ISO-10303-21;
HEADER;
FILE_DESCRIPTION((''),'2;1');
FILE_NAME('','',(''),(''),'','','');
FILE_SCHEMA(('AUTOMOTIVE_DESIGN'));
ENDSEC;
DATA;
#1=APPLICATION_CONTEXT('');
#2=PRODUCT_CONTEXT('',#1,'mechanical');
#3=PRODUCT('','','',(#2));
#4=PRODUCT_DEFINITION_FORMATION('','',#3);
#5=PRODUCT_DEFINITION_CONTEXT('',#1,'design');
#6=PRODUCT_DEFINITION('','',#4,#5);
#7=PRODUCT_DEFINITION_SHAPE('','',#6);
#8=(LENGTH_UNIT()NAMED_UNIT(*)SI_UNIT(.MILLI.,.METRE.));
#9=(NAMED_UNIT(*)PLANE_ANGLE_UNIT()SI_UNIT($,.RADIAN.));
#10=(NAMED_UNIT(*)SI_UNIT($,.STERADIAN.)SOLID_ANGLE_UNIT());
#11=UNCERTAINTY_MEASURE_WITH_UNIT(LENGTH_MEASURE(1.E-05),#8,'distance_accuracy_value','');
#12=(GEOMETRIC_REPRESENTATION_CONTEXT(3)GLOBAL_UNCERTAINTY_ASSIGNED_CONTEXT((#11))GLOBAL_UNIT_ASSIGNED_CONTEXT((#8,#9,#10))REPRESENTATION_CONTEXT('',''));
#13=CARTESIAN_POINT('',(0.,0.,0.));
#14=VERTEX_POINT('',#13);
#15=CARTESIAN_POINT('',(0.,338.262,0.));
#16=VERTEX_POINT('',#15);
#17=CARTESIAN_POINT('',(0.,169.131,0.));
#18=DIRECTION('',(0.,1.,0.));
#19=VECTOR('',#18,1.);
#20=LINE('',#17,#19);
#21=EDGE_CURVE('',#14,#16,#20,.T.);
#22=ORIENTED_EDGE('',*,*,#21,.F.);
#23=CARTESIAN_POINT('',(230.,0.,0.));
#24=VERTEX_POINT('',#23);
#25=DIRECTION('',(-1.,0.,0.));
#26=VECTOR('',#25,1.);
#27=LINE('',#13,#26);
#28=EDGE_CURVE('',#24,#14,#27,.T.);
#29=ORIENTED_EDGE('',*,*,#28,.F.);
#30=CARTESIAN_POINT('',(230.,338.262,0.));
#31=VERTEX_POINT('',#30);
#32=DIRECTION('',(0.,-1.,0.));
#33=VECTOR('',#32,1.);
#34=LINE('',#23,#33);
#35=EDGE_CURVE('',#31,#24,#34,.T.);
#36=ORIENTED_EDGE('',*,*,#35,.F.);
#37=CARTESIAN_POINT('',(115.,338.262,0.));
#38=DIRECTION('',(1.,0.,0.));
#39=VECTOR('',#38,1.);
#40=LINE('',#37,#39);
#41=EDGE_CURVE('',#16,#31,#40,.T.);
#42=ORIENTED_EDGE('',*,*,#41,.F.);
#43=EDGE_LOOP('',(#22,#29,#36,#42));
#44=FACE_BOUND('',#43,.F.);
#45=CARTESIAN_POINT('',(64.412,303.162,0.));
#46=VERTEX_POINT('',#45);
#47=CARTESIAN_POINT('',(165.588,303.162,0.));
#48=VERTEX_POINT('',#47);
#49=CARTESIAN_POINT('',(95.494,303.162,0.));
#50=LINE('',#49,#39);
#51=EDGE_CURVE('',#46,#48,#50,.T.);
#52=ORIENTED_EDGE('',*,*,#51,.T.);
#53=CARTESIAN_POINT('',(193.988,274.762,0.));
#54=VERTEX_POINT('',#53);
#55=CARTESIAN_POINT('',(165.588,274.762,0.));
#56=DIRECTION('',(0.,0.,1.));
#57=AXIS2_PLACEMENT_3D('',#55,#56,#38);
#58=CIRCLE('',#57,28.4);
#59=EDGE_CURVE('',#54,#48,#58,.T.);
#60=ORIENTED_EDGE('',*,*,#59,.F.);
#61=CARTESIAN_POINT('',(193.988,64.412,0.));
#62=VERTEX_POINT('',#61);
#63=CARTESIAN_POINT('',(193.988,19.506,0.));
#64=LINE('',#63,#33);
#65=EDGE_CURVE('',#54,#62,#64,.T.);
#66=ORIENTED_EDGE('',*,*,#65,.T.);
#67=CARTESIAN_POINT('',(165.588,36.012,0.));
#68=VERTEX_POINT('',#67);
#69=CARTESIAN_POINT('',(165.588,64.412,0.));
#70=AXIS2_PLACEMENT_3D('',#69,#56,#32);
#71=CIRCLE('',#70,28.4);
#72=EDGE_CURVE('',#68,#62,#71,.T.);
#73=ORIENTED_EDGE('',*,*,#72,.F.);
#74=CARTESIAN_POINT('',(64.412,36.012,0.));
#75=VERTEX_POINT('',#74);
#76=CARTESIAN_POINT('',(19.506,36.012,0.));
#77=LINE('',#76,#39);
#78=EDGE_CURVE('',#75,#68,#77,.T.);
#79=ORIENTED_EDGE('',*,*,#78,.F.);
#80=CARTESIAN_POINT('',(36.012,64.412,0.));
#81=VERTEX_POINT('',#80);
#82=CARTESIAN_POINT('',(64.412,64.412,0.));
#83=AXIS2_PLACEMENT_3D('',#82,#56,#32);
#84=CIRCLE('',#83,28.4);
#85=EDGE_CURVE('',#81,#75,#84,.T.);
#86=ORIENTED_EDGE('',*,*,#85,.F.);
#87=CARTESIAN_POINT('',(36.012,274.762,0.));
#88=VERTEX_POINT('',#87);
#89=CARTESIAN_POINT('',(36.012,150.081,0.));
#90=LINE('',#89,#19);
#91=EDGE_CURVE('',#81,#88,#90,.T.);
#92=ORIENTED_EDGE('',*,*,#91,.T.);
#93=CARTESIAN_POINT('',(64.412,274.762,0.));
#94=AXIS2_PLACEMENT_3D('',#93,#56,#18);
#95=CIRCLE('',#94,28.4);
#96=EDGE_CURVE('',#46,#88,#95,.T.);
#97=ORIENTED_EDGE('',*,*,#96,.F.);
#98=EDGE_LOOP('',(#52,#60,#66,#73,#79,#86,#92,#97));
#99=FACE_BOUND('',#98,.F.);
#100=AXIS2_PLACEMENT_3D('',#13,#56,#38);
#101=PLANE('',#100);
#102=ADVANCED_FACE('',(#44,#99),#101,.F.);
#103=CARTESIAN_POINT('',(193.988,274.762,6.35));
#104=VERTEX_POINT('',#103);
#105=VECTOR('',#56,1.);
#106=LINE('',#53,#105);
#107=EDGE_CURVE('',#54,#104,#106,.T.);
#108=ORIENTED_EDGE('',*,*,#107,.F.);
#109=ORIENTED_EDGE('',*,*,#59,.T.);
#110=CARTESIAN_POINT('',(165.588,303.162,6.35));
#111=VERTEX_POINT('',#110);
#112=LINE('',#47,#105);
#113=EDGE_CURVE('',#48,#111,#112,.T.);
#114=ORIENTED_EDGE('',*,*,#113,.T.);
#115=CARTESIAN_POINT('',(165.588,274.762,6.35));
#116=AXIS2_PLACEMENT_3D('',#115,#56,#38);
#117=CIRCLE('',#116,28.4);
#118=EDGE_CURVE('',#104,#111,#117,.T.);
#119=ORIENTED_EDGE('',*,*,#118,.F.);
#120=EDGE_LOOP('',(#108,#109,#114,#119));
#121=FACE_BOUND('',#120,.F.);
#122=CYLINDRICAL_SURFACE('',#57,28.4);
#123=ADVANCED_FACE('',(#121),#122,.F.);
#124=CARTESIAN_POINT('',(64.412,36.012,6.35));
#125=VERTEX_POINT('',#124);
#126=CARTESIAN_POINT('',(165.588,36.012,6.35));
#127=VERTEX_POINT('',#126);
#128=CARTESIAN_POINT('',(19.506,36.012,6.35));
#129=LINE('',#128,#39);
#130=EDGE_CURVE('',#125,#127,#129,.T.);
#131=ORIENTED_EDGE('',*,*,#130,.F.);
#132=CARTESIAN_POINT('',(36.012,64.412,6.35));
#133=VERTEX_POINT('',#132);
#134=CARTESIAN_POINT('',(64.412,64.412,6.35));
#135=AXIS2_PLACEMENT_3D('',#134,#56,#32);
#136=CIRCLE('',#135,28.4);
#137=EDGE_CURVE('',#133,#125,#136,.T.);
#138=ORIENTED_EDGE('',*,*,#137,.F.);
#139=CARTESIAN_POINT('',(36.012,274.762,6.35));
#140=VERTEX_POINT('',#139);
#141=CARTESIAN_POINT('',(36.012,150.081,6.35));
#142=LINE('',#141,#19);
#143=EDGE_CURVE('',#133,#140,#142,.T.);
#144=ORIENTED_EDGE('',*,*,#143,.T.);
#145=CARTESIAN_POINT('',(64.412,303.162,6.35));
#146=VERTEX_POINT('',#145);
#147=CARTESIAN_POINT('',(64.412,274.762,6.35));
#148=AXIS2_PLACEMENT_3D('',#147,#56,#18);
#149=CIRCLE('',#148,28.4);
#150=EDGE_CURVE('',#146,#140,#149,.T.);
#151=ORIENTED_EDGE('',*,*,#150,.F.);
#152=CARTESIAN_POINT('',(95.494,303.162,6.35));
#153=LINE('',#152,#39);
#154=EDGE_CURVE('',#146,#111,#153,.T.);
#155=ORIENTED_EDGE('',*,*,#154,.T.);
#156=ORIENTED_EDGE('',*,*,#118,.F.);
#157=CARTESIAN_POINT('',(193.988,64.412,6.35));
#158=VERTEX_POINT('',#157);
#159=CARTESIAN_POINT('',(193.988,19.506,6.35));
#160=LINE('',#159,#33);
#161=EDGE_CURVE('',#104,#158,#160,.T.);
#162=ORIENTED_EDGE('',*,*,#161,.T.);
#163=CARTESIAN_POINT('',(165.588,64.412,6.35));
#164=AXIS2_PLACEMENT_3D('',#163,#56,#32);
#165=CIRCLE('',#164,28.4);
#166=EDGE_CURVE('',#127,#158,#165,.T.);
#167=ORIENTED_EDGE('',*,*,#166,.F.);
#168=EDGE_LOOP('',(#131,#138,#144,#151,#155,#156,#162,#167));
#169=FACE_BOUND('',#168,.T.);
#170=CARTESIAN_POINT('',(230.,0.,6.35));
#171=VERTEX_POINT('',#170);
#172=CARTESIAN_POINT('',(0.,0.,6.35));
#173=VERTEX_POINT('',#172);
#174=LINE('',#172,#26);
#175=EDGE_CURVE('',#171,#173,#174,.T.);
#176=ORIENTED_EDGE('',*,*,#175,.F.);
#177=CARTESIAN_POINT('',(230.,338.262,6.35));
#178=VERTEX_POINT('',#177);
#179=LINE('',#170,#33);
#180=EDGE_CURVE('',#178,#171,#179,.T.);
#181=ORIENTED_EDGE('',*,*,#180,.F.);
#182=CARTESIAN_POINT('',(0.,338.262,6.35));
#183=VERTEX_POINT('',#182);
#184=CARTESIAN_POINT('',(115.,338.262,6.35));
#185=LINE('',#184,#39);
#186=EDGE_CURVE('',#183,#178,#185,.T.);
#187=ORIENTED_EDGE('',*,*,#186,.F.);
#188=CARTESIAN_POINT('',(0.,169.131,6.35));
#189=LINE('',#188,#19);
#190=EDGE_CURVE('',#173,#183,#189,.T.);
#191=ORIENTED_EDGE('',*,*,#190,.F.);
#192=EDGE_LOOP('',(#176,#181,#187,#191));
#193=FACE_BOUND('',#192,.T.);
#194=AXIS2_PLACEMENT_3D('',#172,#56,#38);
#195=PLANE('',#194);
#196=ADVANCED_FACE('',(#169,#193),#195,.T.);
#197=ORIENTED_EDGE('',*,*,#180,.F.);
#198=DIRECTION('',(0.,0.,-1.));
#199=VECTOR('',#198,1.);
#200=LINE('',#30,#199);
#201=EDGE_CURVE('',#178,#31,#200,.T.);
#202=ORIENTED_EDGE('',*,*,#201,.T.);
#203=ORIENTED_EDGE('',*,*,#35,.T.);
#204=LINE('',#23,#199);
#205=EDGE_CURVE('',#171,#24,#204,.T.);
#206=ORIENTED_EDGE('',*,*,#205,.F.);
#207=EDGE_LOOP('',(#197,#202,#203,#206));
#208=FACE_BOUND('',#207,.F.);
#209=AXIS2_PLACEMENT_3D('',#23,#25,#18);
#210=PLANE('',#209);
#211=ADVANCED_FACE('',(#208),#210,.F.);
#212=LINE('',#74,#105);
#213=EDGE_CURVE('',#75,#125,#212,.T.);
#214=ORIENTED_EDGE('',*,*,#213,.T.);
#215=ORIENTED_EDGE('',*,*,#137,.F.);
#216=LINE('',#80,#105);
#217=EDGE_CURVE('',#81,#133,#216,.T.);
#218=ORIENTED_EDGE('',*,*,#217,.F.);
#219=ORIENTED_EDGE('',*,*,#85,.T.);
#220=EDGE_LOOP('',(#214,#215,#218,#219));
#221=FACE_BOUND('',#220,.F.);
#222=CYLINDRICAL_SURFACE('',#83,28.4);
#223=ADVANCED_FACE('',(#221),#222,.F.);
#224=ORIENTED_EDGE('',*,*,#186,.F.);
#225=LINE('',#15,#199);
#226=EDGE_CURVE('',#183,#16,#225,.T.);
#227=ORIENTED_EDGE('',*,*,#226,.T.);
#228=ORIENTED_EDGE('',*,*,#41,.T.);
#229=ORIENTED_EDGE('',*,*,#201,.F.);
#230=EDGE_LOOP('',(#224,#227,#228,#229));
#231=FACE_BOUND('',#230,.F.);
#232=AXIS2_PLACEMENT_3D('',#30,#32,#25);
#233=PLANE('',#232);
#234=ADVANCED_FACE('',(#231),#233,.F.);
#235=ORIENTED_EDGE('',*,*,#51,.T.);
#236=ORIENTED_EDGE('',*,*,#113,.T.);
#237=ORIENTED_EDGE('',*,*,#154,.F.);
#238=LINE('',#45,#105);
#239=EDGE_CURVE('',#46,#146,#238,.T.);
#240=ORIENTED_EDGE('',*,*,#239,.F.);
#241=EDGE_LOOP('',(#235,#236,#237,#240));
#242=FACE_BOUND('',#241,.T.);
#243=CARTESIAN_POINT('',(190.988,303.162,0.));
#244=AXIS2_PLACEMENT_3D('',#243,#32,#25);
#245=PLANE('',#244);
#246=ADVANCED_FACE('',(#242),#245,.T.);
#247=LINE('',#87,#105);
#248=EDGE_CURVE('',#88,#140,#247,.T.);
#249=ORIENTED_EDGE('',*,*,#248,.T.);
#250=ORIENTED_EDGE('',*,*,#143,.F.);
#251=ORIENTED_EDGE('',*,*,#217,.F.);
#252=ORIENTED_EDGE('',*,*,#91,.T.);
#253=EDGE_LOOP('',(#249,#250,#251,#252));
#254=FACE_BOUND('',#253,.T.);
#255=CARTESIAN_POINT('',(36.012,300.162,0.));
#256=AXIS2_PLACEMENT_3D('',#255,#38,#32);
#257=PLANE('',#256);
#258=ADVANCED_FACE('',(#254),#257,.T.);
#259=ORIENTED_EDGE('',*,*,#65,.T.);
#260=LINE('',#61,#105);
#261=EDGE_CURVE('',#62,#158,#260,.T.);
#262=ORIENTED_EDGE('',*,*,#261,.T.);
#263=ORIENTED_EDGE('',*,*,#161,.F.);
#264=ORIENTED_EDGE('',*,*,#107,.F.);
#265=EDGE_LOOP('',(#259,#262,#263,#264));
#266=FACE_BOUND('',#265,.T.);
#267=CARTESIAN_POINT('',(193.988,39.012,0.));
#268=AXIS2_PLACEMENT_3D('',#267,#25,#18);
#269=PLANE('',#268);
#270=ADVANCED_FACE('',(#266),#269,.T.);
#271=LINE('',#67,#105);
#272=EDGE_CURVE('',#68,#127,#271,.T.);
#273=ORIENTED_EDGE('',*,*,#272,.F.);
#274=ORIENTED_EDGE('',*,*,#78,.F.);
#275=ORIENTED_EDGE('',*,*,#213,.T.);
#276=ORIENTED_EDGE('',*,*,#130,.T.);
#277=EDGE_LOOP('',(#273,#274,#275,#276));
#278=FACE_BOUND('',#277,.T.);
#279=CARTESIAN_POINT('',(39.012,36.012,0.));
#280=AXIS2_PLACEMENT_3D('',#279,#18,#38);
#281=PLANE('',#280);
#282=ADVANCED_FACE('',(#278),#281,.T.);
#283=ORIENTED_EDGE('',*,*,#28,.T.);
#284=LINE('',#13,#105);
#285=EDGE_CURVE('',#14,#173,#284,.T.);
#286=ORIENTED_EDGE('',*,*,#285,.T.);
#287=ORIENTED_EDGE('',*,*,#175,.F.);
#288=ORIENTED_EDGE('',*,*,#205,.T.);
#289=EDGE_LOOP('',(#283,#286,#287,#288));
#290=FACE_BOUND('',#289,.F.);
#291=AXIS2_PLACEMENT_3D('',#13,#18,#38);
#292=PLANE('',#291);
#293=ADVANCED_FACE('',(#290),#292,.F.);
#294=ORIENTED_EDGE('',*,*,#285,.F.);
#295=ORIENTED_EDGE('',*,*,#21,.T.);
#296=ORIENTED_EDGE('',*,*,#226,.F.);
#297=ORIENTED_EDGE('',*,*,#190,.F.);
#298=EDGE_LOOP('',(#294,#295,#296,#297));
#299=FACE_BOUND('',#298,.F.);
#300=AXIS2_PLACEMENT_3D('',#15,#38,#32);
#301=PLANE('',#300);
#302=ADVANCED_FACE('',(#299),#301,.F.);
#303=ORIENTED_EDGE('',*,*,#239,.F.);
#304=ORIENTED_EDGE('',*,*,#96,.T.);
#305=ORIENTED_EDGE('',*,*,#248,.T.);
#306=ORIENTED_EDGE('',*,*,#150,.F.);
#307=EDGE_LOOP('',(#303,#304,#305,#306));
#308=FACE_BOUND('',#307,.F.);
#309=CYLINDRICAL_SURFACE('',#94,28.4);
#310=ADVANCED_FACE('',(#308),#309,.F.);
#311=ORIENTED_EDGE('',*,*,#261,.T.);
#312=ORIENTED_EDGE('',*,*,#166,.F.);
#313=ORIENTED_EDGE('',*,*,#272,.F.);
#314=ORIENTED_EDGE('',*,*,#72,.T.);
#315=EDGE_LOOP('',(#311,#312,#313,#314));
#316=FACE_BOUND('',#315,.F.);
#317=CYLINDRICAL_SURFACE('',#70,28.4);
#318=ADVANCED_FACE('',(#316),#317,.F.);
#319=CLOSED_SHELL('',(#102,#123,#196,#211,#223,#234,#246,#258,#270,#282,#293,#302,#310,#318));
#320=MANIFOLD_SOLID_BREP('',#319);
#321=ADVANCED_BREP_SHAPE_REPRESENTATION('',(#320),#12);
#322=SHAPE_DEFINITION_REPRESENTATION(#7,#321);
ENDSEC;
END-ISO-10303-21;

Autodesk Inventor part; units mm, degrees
ref_plane "YZ Plane" through (0, 0, 0) normal (1, 0, 0) x (0, 1, 0)
ref_plane "XZ Plane" through (0, 0, 0) normal (0, 1, 0) x (-1, 0, 0)
ref_plane "XY Plane" through (0, 0, 0) normal (0, 0, 1) x (1, 0, 0)
sketch "Sketch1" plane through (0, 0, 0) normal (0, 0, 1) x (1, 0, 0)
  line L0 (0, 0) -> (230, 0)
  line L1 (230, 0) -> (230, 338.262)
  line L2 (230, 338.262) -> (0, 338.262)
  line L3 (0, 338.262) -> (0, 0)
  line L4 (39.012, 39.012) -> (190.988, 39.012)
  line L5 (190.988, 39.012) -> (190.988, 300.162)
  line L6 (190.988, 300.162) -> (39.012, 300.162)
  line L7 (39.012, 300.162) -> (39.012, 39.012)
  dimension "d0" = 230
  dimension "d1" = 338.262
  dimension "d2" = 39.012
  dimension "d3" = 39.012
  dimension "d4" = 39.012
  dimension "d5" = 38.1
extrude "Extrusion1" add sketch "Sketch1" along normal blind 6.35
fillet "Fillet2" radius 25.4 4 edges at (190.988, 39.012, 3.175) (39.012, 39.012, 3.175) (39.012, 300.162, 3.175) (190.988, 300.162, 3.175)
thicken "Thicken1" operation add thickness 3 both sides no extend neighbours yes toward (-1, 0, 0) faces at (39.012, 134.5287, 4.2333) (98.1373, 300.162, 2.1167) (190.988, 204.6453, 4.2333) (131.8627, 39.012, 2.1167) (184.2075, 47.1356, 2.1167) (60.6263, 39.2957, 2.1167) (40.7678, 284.0417, 2.1167) (189.2322, 284.0417, 2.1167)
equation "\"d3\" = d2"
equation "\"d4\" = d2"
properties part number "Door Panel Front Foam" material "Polyurethane Foam"
